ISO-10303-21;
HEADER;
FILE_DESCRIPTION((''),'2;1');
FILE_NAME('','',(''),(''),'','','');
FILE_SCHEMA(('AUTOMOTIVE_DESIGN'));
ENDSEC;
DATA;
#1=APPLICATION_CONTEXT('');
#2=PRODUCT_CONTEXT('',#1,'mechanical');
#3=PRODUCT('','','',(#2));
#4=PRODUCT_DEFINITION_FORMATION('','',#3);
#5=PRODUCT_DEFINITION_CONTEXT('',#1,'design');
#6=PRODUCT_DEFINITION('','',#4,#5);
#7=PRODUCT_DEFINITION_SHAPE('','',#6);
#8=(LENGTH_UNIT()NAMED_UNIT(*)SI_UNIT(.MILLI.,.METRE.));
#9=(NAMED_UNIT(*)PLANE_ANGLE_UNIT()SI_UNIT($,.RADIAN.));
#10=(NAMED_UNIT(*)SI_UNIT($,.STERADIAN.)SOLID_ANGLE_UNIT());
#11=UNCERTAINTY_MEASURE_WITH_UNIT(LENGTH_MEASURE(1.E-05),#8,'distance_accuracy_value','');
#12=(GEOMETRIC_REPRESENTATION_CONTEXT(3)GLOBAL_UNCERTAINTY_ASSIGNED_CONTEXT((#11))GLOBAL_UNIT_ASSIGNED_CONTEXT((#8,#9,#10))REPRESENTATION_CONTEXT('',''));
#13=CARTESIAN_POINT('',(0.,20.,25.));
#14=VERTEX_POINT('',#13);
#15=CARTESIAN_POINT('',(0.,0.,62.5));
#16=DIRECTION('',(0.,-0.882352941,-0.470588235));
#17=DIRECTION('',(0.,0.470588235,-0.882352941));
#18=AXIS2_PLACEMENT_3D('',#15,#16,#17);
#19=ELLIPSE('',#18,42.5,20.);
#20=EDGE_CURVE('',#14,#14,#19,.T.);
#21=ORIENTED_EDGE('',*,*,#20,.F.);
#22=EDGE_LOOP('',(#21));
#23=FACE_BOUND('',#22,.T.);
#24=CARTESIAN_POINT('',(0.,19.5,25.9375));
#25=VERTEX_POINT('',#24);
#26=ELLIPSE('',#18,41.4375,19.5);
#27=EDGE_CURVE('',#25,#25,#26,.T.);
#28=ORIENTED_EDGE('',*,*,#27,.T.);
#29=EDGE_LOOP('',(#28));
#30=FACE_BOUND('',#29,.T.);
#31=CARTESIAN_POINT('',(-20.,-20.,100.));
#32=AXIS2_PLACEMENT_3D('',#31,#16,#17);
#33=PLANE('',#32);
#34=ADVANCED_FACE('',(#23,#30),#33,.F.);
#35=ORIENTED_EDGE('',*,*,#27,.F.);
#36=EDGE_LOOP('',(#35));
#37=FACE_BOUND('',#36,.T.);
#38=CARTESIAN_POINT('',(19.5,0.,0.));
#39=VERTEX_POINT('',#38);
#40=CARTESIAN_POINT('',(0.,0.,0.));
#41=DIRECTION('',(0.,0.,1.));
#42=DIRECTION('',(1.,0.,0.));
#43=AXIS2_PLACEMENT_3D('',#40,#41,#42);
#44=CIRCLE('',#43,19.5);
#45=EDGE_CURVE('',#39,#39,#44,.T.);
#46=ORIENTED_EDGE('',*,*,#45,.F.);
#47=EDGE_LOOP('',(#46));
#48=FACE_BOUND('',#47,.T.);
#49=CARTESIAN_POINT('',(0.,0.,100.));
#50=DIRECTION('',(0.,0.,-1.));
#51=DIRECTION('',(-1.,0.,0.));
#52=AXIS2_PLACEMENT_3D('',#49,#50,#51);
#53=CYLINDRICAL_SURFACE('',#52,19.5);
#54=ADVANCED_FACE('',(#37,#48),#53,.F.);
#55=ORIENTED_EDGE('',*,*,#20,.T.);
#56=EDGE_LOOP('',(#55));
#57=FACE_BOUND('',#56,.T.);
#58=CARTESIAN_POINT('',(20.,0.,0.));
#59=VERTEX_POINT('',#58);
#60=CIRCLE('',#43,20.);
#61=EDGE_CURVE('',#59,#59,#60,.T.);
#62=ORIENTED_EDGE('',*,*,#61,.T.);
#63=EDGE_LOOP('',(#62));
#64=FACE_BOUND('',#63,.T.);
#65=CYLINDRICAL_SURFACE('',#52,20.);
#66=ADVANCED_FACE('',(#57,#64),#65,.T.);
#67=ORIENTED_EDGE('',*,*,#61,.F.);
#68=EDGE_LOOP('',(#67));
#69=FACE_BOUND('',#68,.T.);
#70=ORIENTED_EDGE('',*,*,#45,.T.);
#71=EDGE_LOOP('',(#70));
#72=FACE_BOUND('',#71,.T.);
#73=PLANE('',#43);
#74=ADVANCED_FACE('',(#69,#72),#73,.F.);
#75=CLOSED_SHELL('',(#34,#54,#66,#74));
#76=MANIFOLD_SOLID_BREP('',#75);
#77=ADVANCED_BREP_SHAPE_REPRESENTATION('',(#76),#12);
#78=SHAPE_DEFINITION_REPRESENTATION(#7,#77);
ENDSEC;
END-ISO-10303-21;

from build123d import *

# Parameters (mm, degrees)
SKETCH1_R               = 20
BOSS_EXTRUDE1_DEPTH     = 100
CUT_EXTRUDE1_DEPTH      = 104.923048454
CUT_EXTRUDE1_DEPTH_BACK = 104.923048454
SHELL1_OUTLINE_R        = 19.5
SHELL1_DEPTH            = 99.0625001


# Read off the part's stored shape, not the designer's step: Shell1
with BuildPart() as part:
    # Sketch1 → Boss-Extrude1 (new body)
    with BuildSketch(Plane.XY):
        Circle(SKETCH1_R)
    extrude(amount=BOSS_EXTRUDE1_DEPTH)

    # Sketch2 → Cut-Extrude1 (cut, two sides: drawn at the far end of the back side and taken through both)
    with BuildSketch(Plane(origin=(0, 0, 0), x_dir=(0, 0, -1), z_dir=(1, 0, 0)).offset(-CUT_EXTRUDE1_DEPTH_BACK)):
        Polygon((-100, -20), (-25, 20), (-100, 20), align=None)
    extrude(amount=CUT_EXTRUDE1_DEPTH + CUT_EXTRUDE1_DEPTH_BACK, mode=Mode.SUBTRACT)

    # Shell1 outline → Shell1 (cut)
    with BuildSketch(Plane.XY):
        Circle(SHELL1_OUTLINE_R)
    extrude(amount=SHELL1_DEPTH, mode=Mode.SUBTRACT)


solid = part.part
